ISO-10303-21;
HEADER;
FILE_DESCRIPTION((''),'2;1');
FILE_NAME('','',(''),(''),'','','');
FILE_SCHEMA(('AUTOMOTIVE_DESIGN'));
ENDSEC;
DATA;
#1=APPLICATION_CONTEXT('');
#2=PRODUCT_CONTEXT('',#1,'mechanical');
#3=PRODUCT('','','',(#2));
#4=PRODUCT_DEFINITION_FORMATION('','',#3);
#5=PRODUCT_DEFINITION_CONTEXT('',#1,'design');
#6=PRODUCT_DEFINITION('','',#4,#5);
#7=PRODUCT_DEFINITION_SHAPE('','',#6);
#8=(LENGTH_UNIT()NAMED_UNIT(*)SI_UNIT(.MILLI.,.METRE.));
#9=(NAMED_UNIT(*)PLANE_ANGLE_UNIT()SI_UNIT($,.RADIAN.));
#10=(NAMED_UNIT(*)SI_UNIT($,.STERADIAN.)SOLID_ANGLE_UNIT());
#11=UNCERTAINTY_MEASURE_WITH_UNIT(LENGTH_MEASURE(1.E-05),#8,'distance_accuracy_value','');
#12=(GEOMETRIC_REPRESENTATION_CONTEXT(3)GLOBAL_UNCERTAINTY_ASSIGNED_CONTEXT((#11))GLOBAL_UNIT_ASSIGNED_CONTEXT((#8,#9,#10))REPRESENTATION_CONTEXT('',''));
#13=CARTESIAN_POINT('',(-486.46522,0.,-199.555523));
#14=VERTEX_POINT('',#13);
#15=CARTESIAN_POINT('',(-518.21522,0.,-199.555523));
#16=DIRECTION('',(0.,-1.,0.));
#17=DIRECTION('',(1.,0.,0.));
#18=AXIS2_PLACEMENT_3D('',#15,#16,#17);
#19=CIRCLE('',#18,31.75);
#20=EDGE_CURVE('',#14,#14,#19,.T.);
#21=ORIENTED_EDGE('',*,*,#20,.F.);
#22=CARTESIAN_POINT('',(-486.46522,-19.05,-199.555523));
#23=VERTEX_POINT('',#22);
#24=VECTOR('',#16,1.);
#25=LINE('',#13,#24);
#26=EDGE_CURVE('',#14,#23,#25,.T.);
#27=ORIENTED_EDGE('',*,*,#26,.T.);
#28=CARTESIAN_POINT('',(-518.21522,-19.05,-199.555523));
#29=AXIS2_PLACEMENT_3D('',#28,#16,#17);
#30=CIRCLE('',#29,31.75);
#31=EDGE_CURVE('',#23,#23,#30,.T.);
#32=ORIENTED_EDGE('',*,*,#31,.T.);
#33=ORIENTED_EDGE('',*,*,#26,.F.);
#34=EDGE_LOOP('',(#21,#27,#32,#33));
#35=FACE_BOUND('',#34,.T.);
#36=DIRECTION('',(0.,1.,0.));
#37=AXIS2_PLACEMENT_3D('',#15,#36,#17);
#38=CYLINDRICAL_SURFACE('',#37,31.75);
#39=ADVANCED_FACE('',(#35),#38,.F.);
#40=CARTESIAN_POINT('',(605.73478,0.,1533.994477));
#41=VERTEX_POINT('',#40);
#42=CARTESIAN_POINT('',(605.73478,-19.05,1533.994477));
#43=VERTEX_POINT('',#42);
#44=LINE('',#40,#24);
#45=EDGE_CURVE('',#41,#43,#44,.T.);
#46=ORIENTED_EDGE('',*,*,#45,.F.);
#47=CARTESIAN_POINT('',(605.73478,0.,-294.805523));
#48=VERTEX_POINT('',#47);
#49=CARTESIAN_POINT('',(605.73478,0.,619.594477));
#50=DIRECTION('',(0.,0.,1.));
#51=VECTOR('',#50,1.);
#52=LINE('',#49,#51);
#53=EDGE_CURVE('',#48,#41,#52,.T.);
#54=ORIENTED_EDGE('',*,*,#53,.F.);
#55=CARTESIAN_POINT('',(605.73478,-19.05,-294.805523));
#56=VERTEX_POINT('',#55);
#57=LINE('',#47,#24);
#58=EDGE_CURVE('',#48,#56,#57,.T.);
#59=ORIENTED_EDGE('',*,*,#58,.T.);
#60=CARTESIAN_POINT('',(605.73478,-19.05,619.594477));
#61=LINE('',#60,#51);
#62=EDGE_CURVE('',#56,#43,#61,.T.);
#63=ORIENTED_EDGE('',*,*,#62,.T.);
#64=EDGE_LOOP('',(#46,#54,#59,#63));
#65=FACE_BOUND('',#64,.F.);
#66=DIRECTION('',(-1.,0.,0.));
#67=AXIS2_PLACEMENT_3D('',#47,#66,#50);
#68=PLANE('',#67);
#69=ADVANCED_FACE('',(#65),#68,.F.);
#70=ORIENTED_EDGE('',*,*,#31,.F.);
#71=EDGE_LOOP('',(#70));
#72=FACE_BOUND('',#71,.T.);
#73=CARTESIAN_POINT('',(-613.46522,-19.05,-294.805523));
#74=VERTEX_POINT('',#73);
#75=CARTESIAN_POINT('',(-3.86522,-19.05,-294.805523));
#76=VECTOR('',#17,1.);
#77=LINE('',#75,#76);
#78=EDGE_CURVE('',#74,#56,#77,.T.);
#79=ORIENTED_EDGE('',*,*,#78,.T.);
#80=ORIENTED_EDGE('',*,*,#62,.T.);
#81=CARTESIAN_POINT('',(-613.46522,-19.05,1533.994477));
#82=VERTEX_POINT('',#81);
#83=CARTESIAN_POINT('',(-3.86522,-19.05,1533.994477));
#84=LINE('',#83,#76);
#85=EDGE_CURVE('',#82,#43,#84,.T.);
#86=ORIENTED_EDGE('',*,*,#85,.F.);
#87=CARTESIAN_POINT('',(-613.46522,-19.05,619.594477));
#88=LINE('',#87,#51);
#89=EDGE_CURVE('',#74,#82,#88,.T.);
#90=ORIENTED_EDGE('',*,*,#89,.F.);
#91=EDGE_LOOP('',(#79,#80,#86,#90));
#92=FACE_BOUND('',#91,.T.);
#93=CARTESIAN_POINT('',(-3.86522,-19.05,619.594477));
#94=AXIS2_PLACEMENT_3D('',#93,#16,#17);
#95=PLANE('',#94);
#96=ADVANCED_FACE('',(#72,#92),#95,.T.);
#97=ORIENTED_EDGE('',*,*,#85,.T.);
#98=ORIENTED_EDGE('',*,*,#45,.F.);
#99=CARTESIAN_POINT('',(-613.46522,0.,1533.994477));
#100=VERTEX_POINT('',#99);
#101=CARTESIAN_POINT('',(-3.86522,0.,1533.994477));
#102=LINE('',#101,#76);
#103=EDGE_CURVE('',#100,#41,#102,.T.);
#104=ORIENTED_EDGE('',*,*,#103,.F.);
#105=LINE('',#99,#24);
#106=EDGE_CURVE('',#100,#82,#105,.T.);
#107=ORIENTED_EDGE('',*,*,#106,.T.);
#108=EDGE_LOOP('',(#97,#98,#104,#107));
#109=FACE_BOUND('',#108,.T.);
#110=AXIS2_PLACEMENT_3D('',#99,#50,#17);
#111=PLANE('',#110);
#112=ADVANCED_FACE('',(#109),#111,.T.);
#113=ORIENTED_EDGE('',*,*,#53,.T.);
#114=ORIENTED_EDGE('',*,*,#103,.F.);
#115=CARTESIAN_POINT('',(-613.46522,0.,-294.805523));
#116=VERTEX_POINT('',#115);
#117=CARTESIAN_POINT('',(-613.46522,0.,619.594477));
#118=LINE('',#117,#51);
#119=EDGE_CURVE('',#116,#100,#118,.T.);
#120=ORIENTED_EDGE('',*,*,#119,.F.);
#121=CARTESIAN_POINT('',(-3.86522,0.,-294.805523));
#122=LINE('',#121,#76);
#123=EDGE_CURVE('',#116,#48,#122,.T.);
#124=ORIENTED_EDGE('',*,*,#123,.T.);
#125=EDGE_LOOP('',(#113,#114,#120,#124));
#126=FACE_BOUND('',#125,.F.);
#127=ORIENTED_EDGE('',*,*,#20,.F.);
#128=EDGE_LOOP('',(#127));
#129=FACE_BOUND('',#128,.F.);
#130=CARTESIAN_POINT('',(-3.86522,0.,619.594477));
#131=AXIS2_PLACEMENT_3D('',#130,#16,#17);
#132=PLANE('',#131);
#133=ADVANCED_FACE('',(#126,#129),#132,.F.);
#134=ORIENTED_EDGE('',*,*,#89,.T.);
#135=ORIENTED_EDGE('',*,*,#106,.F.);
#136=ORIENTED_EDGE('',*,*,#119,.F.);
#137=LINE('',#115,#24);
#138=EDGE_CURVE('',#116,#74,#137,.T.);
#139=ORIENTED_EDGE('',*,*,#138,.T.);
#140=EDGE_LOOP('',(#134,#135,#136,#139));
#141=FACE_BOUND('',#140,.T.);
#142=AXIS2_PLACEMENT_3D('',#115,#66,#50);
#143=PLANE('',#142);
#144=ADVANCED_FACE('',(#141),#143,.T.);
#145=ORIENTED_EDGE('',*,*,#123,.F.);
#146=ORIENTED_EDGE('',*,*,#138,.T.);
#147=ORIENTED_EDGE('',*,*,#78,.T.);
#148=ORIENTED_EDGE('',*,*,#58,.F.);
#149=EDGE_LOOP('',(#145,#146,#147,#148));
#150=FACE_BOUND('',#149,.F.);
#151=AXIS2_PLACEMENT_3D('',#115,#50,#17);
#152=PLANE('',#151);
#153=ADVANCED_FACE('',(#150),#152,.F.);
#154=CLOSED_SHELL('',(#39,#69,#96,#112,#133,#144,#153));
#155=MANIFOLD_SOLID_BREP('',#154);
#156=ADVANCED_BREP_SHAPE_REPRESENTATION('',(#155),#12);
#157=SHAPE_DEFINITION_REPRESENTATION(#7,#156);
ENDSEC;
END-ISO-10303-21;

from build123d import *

# Parameters (mm, degrees)
F0_W     = 1219.2
F0_H     = 1828.8
F0_R     = 31.75
F1_DEPTH = 19.05


# Not quite as in the source:
# - the program builds the solid bodies; features that only make, move or delete a surface that nothing else refers to are left out


with BuildPart() as f1:
    # F0 (on Front) → F1 (new body)
    with BuildSketch(Plane.XZ):
        with Locations((-3.8652196527, 619.5944768926)):
            Rectangle(F0_W, F0_H)
        with Locations((-518.2152196527, -199.5555231074)):
            Circle(F0_R, mode=Mode.SUBTRACT)
    extrude(amount=F1_DEPTH)


solid = f1.part
